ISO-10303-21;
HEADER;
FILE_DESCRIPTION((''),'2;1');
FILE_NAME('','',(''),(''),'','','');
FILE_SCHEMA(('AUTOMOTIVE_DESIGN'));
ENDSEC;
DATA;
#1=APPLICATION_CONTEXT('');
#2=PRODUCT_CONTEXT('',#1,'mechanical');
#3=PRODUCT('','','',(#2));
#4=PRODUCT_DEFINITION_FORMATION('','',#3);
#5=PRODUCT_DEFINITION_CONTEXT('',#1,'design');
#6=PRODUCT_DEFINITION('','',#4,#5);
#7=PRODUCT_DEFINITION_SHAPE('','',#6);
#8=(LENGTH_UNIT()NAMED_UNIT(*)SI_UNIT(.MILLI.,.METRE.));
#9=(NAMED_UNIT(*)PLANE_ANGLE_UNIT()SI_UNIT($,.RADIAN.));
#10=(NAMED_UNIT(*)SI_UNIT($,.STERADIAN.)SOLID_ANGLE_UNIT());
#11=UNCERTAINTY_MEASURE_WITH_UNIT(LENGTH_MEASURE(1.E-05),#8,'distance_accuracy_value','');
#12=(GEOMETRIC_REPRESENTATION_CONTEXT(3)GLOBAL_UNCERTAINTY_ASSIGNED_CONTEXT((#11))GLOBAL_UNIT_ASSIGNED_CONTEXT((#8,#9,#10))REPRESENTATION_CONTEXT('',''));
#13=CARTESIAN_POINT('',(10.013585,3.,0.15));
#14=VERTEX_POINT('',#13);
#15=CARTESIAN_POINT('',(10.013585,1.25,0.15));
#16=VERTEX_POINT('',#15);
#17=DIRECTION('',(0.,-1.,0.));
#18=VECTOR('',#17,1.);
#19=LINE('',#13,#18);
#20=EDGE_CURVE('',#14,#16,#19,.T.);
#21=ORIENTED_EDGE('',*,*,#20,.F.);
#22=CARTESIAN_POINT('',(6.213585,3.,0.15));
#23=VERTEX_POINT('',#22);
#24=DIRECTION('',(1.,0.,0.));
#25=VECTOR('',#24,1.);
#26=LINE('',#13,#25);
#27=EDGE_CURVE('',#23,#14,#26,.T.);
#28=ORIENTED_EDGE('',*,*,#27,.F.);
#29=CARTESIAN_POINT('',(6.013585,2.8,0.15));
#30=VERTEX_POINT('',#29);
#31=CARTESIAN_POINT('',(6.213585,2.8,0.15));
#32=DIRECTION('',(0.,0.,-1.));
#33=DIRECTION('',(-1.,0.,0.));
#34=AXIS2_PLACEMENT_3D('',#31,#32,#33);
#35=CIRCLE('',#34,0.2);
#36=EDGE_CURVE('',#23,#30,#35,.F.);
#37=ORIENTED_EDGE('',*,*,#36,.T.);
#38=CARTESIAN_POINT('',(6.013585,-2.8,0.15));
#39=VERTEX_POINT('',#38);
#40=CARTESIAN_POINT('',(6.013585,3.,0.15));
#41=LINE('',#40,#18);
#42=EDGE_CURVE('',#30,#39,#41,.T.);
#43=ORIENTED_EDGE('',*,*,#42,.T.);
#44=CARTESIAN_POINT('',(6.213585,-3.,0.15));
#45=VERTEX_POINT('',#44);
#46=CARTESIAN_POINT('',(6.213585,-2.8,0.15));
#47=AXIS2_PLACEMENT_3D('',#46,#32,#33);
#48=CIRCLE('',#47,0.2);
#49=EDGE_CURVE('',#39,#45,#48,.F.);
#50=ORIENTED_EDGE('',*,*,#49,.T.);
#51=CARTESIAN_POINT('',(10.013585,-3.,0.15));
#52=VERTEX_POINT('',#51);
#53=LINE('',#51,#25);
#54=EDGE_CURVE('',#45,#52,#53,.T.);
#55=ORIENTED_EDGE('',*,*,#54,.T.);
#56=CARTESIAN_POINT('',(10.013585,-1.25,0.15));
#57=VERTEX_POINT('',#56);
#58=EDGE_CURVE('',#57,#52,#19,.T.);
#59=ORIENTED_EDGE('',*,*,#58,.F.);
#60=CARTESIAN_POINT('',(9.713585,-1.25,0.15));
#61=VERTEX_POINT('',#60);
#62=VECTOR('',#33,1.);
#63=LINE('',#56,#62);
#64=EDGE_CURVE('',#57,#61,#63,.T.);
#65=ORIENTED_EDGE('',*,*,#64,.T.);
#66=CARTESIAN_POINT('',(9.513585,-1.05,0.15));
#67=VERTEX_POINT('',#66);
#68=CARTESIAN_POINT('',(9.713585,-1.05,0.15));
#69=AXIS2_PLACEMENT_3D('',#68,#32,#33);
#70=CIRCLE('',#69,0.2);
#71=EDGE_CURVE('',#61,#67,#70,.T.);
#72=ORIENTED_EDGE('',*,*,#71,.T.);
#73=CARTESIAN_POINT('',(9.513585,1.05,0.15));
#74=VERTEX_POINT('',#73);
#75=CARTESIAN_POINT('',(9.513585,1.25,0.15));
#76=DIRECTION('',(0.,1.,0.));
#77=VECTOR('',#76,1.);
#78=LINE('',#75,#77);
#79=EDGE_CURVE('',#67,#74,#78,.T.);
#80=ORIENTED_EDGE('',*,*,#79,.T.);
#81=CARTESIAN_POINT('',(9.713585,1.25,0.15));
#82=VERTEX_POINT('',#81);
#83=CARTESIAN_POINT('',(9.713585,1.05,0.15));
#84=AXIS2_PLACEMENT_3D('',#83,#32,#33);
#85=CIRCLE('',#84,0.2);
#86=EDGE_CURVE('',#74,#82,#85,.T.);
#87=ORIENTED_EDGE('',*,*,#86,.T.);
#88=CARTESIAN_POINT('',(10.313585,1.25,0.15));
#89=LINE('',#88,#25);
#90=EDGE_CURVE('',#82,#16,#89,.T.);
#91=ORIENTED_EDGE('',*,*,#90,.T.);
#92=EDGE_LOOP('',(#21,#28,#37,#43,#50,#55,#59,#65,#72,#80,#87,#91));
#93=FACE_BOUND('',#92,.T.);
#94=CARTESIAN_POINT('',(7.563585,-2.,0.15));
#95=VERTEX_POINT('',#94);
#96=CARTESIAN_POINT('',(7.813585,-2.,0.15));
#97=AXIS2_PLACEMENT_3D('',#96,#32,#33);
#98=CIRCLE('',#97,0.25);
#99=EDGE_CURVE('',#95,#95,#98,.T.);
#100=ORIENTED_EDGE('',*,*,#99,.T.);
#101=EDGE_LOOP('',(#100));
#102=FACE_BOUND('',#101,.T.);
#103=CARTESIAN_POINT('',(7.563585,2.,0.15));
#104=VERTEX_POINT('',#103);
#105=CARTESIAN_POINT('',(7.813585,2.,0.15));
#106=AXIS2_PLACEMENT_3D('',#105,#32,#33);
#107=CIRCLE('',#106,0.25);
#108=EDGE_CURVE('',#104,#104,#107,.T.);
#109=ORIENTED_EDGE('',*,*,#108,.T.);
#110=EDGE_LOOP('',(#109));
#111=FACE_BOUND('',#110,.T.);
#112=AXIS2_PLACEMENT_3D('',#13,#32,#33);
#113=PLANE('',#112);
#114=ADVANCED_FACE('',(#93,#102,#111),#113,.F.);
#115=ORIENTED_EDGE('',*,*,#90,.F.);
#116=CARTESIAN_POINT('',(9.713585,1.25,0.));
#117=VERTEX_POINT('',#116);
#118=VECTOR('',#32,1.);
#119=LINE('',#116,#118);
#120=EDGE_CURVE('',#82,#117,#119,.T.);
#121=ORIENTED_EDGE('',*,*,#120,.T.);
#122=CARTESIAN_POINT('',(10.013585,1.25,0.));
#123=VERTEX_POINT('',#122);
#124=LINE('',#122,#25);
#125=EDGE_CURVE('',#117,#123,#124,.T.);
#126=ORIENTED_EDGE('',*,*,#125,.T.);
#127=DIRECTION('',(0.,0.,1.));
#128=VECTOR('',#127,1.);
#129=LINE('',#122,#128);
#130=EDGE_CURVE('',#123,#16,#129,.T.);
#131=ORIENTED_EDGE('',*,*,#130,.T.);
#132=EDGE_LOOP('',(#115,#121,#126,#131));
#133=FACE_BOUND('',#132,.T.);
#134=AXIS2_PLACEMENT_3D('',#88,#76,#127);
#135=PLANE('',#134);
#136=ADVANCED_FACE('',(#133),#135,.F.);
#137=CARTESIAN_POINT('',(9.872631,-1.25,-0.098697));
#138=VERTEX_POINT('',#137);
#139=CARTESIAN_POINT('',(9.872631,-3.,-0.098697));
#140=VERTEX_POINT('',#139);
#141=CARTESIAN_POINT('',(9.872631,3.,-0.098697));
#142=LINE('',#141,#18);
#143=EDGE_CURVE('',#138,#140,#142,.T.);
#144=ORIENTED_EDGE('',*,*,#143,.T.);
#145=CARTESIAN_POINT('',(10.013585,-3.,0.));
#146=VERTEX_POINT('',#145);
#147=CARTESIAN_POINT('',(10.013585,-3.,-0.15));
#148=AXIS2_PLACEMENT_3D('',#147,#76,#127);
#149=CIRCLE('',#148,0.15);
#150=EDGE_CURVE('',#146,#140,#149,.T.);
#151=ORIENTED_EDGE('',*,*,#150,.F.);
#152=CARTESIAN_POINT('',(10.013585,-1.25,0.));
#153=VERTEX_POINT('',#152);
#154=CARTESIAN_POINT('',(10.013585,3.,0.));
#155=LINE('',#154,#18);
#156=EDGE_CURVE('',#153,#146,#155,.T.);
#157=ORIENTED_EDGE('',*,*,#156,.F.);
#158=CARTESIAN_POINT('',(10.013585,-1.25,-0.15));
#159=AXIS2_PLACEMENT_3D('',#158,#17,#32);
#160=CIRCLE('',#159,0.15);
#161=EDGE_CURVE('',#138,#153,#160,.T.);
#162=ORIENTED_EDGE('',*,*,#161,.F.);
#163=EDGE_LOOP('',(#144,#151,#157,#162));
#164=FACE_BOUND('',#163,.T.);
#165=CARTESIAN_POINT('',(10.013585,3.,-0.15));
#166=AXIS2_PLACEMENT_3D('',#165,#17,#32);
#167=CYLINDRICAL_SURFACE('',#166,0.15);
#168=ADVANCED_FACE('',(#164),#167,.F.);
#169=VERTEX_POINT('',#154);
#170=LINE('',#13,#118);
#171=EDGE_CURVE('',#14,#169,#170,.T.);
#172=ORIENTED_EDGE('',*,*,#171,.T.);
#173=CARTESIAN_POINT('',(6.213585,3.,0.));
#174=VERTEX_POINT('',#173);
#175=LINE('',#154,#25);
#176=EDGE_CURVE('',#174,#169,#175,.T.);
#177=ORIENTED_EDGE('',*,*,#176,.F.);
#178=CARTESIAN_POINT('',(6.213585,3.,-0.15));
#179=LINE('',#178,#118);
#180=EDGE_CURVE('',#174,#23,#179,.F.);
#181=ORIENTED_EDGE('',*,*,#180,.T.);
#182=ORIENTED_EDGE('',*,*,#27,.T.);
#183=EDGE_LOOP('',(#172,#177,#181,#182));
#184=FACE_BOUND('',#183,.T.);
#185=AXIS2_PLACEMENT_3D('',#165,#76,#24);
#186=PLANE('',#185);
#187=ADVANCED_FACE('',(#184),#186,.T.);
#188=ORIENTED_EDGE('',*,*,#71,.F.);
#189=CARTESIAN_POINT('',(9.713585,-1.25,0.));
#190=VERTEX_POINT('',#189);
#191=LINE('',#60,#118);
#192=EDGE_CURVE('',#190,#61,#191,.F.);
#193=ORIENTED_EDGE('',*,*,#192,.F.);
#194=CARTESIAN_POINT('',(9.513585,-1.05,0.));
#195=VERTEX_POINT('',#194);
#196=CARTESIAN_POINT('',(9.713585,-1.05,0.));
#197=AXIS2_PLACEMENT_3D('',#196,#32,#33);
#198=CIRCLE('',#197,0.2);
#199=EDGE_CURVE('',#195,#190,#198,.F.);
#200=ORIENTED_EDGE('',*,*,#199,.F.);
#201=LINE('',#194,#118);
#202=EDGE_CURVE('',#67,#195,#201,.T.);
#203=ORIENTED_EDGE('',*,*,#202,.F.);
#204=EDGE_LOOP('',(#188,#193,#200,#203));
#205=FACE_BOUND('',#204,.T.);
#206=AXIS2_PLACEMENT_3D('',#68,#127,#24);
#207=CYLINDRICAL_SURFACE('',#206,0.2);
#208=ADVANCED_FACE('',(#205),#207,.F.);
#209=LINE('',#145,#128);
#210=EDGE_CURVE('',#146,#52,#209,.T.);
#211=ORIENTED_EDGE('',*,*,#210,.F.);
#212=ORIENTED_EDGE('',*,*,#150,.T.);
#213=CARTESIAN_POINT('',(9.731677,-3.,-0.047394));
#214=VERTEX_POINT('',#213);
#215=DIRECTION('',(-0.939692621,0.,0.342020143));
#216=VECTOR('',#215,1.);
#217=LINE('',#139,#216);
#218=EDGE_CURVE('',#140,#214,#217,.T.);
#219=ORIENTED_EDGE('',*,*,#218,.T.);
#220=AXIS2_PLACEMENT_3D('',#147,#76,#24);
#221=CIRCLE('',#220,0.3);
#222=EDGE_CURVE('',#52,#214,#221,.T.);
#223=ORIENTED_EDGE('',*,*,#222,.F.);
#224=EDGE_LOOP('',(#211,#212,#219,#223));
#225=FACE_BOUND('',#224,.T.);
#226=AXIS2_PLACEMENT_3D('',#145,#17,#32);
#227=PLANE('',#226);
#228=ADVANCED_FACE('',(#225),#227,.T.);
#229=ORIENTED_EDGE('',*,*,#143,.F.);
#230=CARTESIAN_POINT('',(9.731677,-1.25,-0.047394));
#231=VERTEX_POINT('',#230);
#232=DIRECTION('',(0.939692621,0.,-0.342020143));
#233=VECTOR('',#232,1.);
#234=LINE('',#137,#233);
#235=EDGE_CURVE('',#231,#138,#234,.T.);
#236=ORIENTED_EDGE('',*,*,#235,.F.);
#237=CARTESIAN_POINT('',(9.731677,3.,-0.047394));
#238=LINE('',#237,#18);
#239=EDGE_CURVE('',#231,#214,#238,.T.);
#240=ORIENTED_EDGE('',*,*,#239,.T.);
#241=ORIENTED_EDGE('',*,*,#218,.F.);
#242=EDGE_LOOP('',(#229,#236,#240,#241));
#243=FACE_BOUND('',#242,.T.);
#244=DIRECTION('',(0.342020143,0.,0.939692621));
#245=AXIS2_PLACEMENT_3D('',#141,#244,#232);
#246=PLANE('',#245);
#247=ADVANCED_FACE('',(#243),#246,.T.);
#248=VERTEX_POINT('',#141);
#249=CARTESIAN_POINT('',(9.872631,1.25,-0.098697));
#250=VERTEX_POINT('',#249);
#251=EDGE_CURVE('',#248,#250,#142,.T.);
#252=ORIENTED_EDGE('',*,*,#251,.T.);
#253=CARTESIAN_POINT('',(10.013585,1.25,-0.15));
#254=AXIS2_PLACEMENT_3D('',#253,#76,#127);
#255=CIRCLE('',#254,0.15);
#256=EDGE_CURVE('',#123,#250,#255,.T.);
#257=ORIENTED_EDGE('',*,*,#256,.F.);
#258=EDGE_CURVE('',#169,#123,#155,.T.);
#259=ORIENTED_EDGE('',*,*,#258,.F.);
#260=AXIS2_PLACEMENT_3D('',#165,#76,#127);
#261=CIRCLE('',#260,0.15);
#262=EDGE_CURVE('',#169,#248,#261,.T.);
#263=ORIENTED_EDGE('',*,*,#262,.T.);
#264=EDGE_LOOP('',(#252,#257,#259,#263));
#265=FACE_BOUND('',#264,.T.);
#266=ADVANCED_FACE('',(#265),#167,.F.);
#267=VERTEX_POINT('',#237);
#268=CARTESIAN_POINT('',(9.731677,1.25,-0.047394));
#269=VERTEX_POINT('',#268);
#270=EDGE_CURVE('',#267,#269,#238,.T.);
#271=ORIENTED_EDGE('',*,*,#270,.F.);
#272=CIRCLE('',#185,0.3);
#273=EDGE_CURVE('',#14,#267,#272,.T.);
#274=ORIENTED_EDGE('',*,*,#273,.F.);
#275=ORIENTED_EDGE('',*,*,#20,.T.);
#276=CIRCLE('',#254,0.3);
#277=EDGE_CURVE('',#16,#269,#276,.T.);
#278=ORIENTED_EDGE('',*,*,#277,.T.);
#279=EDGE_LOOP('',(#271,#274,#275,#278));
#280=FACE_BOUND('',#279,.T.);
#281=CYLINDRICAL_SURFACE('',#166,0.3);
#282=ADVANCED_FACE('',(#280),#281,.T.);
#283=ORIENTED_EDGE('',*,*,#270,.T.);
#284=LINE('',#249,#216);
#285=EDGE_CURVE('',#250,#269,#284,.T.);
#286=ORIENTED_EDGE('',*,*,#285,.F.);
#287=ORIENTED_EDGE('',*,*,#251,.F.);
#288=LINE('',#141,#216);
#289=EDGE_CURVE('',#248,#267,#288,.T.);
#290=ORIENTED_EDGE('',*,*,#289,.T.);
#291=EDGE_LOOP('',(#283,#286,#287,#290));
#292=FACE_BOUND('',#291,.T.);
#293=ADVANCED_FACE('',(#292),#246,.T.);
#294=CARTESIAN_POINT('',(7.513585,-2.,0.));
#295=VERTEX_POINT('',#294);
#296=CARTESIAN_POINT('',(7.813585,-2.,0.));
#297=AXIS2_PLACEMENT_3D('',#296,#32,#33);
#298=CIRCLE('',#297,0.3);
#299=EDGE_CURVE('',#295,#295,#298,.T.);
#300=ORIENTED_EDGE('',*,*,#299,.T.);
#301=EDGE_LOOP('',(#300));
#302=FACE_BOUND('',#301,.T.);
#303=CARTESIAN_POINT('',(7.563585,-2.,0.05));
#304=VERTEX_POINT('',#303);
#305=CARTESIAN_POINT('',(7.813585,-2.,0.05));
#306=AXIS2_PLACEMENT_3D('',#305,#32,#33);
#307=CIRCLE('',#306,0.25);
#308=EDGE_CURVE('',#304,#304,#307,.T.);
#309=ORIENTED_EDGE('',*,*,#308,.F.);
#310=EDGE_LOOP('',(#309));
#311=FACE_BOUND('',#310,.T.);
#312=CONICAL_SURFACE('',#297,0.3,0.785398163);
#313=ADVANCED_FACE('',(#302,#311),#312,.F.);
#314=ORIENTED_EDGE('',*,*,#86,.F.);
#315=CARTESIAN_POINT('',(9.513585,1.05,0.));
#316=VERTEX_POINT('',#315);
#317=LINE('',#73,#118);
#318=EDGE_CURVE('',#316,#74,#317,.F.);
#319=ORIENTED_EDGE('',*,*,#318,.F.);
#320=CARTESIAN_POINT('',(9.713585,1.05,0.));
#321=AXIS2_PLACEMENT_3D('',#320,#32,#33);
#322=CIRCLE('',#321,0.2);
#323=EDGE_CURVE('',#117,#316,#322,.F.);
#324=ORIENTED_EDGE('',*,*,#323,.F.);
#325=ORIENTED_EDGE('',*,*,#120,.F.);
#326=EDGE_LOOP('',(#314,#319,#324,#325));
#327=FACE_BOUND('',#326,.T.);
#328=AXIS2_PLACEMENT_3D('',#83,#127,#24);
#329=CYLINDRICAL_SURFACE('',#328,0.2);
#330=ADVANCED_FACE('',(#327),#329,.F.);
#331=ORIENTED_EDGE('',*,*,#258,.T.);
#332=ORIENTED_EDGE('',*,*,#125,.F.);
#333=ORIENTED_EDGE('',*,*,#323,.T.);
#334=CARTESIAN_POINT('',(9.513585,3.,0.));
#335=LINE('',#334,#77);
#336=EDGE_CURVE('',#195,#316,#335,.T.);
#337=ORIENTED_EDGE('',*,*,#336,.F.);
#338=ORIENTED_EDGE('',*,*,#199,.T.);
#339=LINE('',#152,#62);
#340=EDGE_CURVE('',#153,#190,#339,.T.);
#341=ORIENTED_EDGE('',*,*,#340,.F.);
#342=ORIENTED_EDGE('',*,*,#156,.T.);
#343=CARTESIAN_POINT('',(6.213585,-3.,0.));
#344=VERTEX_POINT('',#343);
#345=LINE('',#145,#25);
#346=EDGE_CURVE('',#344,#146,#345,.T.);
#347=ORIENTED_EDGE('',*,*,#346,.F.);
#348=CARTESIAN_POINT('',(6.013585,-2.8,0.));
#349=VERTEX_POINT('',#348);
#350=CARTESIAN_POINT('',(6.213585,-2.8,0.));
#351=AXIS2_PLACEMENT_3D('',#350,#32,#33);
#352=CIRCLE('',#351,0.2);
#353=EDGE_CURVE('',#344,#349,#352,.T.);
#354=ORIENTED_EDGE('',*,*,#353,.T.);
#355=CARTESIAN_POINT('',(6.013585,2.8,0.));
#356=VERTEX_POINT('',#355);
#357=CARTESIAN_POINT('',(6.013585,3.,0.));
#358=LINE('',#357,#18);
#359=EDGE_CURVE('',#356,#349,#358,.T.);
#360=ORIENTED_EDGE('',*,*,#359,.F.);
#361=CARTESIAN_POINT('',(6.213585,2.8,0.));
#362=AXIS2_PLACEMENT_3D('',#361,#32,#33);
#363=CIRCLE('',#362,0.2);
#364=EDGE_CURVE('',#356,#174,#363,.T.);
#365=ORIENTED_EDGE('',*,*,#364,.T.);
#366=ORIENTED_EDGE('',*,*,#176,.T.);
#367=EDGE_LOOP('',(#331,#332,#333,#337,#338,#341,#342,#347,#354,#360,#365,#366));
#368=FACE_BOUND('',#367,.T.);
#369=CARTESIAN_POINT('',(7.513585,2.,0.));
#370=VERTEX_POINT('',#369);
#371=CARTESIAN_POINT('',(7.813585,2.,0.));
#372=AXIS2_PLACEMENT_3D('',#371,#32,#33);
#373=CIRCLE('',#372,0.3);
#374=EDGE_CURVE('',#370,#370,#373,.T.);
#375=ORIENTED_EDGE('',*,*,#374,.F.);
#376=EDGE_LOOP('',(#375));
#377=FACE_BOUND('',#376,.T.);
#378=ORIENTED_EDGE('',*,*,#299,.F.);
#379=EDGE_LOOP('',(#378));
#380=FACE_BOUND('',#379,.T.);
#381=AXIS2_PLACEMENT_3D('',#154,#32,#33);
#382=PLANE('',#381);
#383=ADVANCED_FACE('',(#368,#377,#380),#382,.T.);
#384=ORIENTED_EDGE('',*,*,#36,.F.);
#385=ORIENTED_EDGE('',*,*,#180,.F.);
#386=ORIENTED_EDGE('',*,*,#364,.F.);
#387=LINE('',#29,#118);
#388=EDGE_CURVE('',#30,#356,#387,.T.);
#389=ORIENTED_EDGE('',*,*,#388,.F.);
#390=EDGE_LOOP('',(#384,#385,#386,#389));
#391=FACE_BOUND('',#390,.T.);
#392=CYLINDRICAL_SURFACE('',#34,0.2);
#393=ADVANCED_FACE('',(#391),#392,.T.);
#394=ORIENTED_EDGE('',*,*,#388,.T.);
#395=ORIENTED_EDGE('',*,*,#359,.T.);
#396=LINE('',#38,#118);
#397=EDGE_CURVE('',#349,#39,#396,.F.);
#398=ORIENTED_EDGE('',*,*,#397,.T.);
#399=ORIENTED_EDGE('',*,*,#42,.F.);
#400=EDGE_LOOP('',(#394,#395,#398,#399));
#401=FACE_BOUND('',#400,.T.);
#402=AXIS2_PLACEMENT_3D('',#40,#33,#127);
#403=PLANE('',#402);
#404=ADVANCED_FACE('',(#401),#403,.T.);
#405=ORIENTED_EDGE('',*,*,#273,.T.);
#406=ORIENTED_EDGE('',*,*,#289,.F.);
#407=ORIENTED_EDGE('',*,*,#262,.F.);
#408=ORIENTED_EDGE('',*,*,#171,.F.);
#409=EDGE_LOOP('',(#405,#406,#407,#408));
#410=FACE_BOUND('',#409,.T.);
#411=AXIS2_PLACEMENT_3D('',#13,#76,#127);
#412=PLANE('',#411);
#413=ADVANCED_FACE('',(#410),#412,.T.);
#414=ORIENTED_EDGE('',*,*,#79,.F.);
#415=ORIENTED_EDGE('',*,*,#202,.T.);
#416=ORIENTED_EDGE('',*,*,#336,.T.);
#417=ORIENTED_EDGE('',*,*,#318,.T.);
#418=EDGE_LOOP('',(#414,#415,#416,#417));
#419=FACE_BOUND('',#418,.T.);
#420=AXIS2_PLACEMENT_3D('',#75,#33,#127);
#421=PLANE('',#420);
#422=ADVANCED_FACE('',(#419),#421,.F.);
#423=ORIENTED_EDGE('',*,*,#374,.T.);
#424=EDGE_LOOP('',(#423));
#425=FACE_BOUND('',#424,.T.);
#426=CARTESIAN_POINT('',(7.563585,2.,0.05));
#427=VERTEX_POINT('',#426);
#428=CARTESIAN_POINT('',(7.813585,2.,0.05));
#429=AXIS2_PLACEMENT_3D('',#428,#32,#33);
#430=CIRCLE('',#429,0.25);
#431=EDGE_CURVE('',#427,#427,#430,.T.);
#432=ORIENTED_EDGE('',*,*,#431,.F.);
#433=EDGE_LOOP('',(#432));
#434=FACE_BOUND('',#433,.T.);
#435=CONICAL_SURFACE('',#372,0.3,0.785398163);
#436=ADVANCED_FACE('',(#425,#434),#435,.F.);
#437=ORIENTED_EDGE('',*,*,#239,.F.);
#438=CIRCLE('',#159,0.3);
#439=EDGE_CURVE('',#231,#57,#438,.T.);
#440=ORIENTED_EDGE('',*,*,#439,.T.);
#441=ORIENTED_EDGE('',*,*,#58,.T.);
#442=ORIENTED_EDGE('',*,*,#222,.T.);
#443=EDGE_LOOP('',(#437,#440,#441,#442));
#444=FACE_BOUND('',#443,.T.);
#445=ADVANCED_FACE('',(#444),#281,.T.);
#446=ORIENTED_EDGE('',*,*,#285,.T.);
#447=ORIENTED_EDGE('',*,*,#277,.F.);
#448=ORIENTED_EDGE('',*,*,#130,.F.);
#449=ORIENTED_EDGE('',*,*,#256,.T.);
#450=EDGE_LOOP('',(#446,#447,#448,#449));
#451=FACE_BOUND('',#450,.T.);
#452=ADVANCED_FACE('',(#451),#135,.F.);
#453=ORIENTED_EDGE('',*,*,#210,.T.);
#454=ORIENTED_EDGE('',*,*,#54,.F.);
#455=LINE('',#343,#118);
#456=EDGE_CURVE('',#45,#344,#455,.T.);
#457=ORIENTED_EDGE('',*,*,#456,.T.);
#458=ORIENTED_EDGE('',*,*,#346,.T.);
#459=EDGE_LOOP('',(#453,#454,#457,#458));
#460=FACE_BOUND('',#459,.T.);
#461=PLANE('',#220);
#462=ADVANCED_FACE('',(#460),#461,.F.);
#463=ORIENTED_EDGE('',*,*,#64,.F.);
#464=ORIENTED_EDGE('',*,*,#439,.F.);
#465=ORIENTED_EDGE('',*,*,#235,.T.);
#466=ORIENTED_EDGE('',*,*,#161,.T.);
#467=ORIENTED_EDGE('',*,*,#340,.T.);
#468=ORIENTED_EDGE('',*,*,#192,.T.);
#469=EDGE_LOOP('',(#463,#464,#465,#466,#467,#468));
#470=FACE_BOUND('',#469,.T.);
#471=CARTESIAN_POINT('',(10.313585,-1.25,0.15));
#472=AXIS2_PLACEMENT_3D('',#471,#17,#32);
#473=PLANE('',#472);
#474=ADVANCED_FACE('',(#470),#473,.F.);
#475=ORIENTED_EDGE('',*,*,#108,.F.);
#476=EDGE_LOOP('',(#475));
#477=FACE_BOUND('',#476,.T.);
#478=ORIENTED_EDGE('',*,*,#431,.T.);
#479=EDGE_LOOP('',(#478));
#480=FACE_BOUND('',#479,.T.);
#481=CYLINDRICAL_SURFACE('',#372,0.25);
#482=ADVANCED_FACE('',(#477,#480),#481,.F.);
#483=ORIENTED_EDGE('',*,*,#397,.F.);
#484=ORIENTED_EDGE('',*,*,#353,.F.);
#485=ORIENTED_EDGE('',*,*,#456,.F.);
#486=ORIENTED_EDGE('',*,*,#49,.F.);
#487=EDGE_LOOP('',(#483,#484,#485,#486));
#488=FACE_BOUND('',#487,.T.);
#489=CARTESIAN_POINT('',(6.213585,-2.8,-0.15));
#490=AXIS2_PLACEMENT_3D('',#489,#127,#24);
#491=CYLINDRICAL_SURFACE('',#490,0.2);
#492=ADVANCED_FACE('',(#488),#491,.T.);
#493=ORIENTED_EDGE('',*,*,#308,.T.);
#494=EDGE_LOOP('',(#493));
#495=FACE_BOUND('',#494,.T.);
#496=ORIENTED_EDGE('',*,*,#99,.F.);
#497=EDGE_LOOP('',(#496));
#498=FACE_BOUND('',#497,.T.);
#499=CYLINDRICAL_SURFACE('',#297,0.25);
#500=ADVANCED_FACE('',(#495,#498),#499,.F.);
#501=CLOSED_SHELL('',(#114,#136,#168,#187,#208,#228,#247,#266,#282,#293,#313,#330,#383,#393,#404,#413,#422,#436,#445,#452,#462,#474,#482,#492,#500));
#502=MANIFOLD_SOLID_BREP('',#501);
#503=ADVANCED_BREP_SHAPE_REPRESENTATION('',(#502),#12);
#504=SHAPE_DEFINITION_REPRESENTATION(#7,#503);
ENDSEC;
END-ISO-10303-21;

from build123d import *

# Parameters (mm, degrees)
BASE_FLANGE1_DEPTH                             = 3
CUT_EXTRUDE1_DEPTH                             = 11.75046698
CUT_EXTRUDE1_DEPTH_BACK                        = 11.75046698
SKETCH10_W                                     = 0.8
SKETCH10_H                                     = 2.5
FILLET1_R                                      = 0.2
CSK_FOR_M3_FLAT_HEAD_MACHINE_SCREW1_AT_2_COUNT = 2
CSK_FOR_M3_FLAT_HEAD_MACHINE_SCREW1_AT_2_PITCH = 4


# Sheet-metal steps are written as plain solids
with BuildPart() as part:
    # Sketch5 → Base-Flange1 (new, symmetric)
    with BuildSketch(Plane(origin=(0, 0, 0), x_dir=(1, 0, 0), z_dir=(0, 1, 0))):
        with BuildLine():
            ThreePointArc((9.872631336, 0.098696979), (10.099621695, 0.272872807), (10.013585229, 0))
            Line((10.013585229, 0), (6.013585229, 0))
            Line((6.013585229, 0), (6.013585229, -0.15))
            Line((6.013585229, -0.15), (10.013585229, -0.15))
            ThreePointArc((10.013585229, -0.15), (10.18565816, 0.395745613), (9.731677443, 0.047393957))
            Line((9.731677443, 0.047393957), (9.872631336, 0.098696979))
        make_face()
    extrude(amount=BASE_FLANGE1_DEPTH, both=True)

    # Sketch10 → Cut-Extrude1 (cut, two sides: drawn at the far end of the back side and taken through both)
    with BuildSketch(Plane(origin=(0, 0, 0), x_dir=(-1, 0, 0), z_dir=(0, 0, -1)).offset(-CUT_EXTRUDE1_DEPTH_BACK)):
        with Locations((-9.913585229, 0)):
            Rectangle(SKETCH10_W, SKETCH10_H)
    extrude(amount=CUT_EXTRUDE1_DEPTH + CUT_EXTRUDE1_DEPTH_BACK, mode=Mode.SUBTRACT)

    # Fillet1
    fillet1_edges = [part.edges().sort_by_distance(p)[0] for p in [
        (6.013585229, 3, 0.075),
        (9.513585229, -1.25, 0.075),
        (9.513585229, 1.25, 0.075),
        (6.013585229, -3, 0.075),
    ]]
    fillet(fillet1_edges, radius=FILLET1_R)

    # Sketch13 → CSK for M3 Flat Head Machine Screw1 (revolve, cut)
    with BuildSketch(Plane(origin=(7.813585229, 2, 0), x_dir=(0, 1, 0), z_dir=(1, 0, 0))):
        Polygon((0, 0), (0, 0.15), (0.25, 0.15), (0.25, 0.05), (0.3, 0), align=None)
    csk_for_m3_flat_head_machine_screw1 = revolve(axis=Axis((7.813585229, 2, -6.35), (0, 0, 1)), mode=Mode.SUBTRACT)

    # CSK for M3 Flat Head Machine Screw1 at 2: CSK for M3 Flat Head Machine Screw1 ×2
    with Locations(*[(0, -i * CSK_FOR_M3_FLAT_HEAD_MACHINE_SCREW1_AT_2_PITCH, 0) for i in range(1, CSK_FOR_M3_FLAT_HEAD_MACHINE_SCREW1_AT_2_COUNT)]):
        add(csk_for_m3_flat_head_machine_screw1, mode=Mode.SUBTRACT)


solid = part.part
